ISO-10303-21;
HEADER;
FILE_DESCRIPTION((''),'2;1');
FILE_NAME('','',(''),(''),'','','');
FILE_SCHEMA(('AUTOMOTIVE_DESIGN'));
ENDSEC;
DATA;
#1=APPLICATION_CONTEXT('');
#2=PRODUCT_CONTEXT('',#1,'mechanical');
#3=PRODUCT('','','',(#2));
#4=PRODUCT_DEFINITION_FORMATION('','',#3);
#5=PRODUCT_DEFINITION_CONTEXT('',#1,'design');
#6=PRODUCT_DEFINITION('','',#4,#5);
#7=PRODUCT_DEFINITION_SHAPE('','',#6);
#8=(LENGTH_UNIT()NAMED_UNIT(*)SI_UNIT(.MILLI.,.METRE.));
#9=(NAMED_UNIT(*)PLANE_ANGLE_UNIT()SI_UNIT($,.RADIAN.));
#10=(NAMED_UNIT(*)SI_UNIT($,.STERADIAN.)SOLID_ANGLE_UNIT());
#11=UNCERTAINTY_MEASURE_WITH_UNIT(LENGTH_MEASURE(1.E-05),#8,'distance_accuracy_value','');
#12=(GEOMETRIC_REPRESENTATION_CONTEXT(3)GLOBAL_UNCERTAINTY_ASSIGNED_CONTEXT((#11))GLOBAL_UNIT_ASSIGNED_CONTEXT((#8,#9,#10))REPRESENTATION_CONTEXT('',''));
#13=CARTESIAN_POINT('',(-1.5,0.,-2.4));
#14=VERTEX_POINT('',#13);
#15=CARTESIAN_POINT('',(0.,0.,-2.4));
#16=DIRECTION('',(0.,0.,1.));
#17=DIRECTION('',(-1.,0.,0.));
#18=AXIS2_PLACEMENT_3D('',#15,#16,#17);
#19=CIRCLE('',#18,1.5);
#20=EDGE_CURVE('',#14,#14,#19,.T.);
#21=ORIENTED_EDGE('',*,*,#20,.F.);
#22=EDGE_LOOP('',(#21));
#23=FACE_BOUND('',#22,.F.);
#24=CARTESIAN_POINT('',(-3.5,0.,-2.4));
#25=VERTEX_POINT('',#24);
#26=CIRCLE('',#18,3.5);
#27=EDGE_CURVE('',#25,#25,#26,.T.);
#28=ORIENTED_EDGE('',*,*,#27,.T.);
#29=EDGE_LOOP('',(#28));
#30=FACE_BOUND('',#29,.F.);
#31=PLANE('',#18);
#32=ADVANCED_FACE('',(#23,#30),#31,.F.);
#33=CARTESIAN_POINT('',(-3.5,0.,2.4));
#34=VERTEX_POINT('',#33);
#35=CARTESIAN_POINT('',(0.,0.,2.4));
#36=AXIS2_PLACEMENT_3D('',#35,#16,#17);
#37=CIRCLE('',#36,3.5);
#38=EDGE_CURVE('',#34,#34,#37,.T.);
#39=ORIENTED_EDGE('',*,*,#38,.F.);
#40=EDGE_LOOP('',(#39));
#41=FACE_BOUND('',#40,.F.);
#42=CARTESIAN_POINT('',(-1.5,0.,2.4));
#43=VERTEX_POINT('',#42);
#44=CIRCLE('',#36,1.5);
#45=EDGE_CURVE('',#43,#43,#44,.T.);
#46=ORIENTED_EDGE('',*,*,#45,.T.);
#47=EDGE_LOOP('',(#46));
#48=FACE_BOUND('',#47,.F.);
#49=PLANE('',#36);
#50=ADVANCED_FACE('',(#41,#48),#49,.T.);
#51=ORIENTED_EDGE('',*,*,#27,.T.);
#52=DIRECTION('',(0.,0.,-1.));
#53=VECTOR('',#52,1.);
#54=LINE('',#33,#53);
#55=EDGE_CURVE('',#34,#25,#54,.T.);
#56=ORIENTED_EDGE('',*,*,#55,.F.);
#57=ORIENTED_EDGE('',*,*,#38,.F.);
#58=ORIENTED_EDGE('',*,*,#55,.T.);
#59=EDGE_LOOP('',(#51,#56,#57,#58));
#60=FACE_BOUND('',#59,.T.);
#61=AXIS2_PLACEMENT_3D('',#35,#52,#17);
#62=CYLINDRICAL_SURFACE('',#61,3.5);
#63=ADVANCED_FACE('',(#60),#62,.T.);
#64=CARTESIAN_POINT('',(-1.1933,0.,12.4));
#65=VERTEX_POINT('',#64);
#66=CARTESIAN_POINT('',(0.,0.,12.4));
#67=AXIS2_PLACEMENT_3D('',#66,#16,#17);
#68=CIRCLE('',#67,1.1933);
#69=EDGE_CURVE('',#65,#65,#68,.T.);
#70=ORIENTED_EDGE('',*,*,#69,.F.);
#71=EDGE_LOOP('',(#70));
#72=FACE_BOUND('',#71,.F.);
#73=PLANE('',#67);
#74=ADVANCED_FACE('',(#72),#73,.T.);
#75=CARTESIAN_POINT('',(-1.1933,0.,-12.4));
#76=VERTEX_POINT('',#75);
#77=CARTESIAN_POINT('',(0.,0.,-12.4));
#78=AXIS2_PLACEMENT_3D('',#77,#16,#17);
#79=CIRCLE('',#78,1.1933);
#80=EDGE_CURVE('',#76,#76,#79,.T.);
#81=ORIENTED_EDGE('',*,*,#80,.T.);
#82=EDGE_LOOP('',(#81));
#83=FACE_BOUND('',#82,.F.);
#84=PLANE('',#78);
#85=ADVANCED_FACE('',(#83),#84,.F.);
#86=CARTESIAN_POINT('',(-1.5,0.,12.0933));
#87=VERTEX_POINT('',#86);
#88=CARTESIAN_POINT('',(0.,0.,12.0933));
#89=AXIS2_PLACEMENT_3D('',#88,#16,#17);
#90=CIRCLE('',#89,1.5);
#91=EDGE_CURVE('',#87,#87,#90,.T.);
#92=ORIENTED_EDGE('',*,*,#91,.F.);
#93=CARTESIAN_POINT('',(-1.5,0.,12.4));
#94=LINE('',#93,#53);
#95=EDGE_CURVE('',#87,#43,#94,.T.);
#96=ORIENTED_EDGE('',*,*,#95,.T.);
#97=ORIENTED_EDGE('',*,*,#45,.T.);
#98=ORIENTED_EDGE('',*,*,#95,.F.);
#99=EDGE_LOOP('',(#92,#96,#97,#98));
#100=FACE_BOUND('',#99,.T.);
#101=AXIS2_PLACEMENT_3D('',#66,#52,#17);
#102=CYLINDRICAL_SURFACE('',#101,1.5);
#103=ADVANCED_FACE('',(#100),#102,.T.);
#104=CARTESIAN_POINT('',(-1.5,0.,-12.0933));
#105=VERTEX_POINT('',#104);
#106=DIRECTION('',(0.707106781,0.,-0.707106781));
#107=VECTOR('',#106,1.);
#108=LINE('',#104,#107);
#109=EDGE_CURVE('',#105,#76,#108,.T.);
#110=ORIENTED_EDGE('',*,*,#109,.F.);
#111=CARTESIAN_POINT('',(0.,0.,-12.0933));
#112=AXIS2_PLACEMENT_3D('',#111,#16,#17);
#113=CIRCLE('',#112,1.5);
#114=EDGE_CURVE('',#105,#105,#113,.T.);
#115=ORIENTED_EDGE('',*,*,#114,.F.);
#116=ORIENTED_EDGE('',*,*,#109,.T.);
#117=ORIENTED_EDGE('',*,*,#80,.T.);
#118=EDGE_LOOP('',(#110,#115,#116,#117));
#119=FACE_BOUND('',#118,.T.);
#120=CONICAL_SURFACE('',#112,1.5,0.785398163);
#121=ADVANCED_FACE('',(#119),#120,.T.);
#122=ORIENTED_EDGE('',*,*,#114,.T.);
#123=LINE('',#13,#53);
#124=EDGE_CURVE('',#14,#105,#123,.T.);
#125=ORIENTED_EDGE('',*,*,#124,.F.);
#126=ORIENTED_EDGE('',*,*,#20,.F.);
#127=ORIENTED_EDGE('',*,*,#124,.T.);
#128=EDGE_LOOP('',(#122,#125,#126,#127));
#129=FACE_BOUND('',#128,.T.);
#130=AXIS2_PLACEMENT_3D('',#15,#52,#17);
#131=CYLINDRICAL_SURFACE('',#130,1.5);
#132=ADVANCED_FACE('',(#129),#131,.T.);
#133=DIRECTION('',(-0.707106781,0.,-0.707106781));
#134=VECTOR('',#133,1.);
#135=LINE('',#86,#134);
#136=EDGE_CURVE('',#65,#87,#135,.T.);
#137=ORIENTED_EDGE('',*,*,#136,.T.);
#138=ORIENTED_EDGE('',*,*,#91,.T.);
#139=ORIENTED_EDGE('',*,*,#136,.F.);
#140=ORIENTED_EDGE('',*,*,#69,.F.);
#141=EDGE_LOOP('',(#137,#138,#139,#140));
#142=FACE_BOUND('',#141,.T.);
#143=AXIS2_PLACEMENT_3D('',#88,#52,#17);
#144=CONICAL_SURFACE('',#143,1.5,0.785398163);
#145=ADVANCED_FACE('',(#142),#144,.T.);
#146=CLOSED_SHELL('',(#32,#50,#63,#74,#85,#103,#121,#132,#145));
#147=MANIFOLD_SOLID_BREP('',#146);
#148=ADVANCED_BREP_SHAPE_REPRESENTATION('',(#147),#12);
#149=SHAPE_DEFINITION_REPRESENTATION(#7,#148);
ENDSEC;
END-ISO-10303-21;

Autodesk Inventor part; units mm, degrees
ref_plane "YZ Plane" through (0, 0, 0) normal (1, 0, 0) x (0, 1, 0)
ref_plane "XZ Plane" through (0, 0, 0) normal (0, 1, 0) x (-1, 0, 0)
ref_plane "XY Plane" through (0, 0, 0) normal (0, 0, 1) x (1, 0, 0)
sketch "Boceto1" plane through (0, 0, 0) normal (0, 1, 0) x (-1, 0, 0)
  line L0 (0, 12.4) -> (1.5, 12.4)
  line L1 (1.5, 12.4) -> (1.5, 2.4)
  line L2 (1.5, 2.4) -> (3.5, 2.4)
  line L3 (3.5, 2.4) -> (3.5, -2.4)
  line L4 (3.5, -2.4) -> (1.5, -2.4)
  line L5 (1.5, -2.4) -> (1.5, -12.4)
  line L6 (1.5, -12.4) -> (0, -12.4)
  line L7 (0, -12.4) -> (0, 12.4)
  point P0 (0, 0)
  point P1 (0, 0)
  dimension "d0" = 7
  dimension "d1" = 3
  dimension "Dedos" = 4.8
  dimension "R" = 10
revolve "Revolución1" add sketch "Boceto1" angle 360 about axis through (0, 0, -12.4) along (0, 0, 1)
thread "Rosca2" size "M3x0.5" class "6g" standard "ANSI Metric M Profile" length 4
thread "Rosca3" size "M3x0.5" class "6g" standard "ANSI Metric M Profile" length 4 offset 6
chamfer "Chaflán1" distance 0.3067 angle 45 2 edges at (1.5, 0, 12.4) (1.5, 0, -12.4)
properties part number "Clavija" material "Aluminum 7075"
